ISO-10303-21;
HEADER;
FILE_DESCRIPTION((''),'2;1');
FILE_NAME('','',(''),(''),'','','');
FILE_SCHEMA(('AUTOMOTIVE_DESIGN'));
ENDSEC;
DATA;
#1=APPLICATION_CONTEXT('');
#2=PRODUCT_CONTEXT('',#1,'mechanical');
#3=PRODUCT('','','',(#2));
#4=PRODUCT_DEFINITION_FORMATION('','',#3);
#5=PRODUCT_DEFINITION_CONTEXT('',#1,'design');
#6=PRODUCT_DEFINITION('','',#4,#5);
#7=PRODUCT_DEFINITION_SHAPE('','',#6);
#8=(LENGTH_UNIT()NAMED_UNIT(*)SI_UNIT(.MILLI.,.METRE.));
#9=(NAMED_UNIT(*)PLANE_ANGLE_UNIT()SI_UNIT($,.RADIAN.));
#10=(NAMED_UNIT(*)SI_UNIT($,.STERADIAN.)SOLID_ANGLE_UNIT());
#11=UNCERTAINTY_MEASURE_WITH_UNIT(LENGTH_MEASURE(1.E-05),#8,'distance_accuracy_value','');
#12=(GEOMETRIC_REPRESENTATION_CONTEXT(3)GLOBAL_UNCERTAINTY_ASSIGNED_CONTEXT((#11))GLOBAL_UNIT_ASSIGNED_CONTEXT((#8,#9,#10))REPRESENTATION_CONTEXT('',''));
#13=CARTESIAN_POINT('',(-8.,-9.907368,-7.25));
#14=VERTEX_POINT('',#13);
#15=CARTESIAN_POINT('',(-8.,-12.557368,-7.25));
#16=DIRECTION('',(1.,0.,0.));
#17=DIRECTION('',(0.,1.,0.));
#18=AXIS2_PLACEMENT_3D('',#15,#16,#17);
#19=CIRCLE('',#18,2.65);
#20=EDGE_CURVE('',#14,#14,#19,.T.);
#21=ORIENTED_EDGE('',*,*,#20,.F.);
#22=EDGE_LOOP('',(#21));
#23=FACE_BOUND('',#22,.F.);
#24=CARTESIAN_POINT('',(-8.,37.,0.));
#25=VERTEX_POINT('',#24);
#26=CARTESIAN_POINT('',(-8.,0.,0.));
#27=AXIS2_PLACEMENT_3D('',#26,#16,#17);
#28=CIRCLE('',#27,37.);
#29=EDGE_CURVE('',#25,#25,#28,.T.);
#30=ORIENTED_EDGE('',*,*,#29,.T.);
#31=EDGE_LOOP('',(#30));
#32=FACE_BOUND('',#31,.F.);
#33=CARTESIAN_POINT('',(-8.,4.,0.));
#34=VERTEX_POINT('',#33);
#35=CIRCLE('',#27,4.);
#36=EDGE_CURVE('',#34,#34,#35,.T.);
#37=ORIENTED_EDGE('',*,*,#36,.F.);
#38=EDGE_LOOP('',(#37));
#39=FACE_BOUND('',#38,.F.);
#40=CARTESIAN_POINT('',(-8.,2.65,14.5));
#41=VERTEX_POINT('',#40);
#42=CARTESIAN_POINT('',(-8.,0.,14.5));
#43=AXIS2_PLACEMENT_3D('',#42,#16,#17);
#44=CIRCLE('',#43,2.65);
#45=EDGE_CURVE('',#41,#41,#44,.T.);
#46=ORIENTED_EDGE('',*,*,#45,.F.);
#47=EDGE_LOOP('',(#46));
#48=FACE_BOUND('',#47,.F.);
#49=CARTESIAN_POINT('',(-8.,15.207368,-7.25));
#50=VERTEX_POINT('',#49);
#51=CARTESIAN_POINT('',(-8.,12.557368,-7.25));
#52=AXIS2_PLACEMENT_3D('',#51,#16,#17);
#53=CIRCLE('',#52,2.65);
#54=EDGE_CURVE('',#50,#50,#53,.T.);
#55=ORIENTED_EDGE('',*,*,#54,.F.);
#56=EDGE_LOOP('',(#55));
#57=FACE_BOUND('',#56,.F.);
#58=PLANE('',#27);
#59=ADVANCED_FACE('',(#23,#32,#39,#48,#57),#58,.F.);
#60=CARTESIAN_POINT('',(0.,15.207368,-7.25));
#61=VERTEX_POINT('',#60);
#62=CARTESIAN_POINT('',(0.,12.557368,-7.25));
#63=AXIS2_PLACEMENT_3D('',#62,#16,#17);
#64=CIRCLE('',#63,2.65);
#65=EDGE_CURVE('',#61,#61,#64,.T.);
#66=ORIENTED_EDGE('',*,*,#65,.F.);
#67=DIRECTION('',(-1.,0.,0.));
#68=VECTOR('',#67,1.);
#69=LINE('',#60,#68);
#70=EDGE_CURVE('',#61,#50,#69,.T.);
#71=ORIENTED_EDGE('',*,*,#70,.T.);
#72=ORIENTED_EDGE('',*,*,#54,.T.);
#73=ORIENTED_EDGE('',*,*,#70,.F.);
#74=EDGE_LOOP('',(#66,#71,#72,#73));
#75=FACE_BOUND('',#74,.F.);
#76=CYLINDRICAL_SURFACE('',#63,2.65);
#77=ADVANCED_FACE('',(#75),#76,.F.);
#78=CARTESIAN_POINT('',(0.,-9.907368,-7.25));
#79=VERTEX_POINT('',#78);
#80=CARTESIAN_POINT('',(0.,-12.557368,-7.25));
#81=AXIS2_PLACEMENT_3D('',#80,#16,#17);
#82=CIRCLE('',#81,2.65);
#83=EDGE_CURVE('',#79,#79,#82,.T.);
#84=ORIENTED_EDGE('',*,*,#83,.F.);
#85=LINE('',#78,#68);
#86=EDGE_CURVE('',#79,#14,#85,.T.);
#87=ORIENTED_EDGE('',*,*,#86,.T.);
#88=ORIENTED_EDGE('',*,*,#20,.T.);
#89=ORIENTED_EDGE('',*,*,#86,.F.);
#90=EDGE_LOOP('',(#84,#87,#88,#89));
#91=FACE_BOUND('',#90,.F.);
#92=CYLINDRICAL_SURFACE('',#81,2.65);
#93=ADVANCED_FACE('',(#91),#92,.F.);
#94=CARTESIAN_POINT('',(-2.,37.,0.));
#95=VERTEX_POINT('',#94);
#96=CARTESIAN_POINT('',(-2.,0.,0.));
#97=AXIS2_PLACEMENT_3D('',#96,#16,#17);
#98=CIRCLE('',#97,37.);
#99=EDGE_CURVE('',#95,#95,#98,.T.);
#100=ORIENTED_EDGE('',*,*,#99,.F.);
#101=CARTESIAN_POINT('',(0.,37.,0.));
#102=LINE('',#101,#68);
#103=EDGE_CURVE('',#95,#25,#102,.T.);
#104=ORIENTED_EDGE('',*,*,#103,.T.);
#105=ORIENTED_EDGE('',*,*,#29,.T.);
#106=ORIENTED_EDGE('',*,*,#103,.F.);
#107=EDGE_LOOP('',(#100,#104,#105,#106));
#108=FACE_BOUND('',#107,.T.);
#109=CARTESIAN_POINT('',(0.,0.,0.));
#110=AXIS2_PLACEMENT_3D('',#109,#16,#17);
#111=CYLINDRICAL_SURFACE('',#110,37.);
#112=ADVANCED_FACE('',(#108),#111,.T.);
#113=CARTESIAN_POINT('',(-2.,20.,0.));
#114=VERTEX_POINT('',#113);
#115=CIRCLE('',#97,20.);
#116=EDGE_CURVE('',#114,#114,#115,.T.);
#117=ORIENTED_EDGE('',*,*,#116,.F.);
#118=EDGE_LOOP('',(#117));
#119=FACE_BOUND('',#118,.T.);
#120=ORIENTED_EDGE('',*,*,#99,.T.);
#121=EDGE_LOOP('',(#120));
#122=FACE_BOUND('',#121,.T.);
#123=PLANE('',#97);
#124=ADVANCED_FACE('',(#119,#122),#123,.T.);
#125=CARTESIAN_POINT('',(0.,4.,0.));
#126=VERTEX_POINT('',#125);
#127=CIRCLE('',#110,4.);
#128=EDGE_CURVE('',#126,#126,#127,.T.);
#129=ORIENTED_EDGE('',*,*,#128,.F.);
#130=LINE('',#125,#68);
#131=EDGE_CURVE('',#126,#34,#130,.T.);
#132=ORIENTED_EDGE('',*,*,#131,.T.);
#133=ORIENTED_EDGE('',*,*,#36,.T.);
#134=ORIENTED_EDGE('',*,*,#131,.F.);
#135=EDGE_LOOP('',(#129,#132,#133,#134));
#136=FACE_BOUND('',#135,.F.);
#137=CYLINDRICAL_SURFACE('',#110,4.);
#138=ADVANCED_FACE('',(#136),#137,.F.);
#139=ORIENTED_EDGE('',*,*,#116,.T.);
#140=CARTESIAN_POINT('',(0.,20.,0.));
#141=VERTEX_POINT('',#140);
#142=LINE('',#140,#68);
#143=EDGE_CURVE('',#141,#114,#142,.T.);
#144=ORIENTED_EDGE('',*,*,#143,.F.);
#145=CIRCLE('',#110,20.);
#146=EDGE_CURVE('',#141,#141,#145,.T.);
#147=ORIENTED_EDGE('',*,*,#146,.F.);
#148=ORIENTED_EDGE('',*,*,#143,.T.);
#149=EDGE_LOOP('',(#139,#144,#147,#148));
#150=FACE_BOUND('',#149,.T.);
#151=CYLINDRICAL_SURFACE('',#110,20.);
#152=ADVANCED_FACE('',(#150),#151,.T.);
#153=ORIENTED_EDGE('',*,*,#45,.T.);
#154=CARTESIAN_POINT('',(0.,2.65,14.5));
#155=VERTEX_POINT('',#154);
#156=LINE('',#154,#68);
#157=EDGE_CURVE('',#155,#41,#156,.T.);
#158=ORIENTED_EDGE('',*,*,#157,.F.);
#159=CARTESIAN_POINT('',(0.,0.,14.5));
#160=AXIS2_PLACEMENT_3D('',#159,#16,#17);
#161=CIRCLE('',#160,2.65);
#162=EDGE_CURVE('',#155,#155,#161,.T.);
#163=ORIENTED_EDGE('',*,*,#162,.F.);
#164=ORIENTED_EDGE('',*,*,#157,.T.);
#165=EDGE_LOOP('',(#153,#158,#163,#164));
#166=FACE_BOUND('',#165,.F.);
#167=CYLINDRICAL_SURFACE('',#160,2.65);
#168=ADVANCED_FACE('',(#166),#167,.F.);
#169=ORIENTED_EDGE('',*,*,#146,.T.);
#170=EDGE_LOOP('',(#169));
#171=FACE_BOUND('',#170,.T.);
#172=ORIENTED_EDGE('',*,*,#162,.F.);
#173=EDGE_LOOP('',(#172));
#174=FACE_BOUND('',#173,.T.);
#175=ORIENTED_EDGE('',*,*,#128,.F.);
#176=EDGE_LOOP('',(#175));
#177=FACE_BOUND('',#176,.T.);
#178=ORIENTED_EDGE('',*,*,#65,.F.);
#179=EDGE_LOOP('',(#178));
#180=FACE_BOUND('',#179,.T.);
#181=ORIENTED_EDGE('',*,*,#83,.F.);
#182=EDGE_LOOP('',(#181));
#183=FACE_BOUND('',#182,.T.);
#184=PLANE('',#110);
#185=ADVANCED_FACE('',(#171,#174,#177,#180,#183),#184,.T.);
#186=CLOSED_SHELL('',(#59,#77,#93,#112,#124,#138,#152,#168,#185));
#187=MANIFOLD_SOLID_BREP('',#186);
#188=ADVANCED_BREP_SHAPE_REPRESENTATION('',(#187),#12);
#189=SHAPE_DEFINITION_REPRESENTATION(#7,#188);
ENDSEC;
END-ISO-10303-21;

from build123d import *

# Parameters (mm, degrees)
F0_R     = 37
F0_R_2   = 20
F0_R_3   = 2.65
F0_R_4   = 4
F1_DEPTH = 8
F2_DEPTH = 2


# Not quite as in the source:
# - a feature names something its author has since deleted; it is built from what else it names


with BuildPart() as f1:
    # F0 (on Right) → F1 (new body)
    with BuildSketch(Plane.YZ):
        Circle(F0_R)
        Circle(F0_R_2, mode=Mode.SUBTRACT)
        Circle(F0_R_2)
        with Locations((-12.5573683549, -7.25)):
            Circle(F0_R_3, mode=Mode.SUBTRACT)
        with Locations((12.5573683549, -7.25)):
            Circle(F0_R_3, mode=Mode.SUBTRACT)
        Circle(F0_R_4, mode=Mode.SUBTRACT)
        with Locations((0, 14.5)):
            Circle(F0_R_3, mode=Mode.SUBTRACT)
    extrude(amount=-F1_DEPTH)

    # F0 (on Right) → F2 (cut)
    with BuildSketch(Plane.YZ):
        Circle(F0_R)
        Circle(F0_R_2, mode=Mode.SUBTRACT)
    extrude(amount=-F2_DEPTH, mode=Mode.SUBTRACT)


solid = f1.part
